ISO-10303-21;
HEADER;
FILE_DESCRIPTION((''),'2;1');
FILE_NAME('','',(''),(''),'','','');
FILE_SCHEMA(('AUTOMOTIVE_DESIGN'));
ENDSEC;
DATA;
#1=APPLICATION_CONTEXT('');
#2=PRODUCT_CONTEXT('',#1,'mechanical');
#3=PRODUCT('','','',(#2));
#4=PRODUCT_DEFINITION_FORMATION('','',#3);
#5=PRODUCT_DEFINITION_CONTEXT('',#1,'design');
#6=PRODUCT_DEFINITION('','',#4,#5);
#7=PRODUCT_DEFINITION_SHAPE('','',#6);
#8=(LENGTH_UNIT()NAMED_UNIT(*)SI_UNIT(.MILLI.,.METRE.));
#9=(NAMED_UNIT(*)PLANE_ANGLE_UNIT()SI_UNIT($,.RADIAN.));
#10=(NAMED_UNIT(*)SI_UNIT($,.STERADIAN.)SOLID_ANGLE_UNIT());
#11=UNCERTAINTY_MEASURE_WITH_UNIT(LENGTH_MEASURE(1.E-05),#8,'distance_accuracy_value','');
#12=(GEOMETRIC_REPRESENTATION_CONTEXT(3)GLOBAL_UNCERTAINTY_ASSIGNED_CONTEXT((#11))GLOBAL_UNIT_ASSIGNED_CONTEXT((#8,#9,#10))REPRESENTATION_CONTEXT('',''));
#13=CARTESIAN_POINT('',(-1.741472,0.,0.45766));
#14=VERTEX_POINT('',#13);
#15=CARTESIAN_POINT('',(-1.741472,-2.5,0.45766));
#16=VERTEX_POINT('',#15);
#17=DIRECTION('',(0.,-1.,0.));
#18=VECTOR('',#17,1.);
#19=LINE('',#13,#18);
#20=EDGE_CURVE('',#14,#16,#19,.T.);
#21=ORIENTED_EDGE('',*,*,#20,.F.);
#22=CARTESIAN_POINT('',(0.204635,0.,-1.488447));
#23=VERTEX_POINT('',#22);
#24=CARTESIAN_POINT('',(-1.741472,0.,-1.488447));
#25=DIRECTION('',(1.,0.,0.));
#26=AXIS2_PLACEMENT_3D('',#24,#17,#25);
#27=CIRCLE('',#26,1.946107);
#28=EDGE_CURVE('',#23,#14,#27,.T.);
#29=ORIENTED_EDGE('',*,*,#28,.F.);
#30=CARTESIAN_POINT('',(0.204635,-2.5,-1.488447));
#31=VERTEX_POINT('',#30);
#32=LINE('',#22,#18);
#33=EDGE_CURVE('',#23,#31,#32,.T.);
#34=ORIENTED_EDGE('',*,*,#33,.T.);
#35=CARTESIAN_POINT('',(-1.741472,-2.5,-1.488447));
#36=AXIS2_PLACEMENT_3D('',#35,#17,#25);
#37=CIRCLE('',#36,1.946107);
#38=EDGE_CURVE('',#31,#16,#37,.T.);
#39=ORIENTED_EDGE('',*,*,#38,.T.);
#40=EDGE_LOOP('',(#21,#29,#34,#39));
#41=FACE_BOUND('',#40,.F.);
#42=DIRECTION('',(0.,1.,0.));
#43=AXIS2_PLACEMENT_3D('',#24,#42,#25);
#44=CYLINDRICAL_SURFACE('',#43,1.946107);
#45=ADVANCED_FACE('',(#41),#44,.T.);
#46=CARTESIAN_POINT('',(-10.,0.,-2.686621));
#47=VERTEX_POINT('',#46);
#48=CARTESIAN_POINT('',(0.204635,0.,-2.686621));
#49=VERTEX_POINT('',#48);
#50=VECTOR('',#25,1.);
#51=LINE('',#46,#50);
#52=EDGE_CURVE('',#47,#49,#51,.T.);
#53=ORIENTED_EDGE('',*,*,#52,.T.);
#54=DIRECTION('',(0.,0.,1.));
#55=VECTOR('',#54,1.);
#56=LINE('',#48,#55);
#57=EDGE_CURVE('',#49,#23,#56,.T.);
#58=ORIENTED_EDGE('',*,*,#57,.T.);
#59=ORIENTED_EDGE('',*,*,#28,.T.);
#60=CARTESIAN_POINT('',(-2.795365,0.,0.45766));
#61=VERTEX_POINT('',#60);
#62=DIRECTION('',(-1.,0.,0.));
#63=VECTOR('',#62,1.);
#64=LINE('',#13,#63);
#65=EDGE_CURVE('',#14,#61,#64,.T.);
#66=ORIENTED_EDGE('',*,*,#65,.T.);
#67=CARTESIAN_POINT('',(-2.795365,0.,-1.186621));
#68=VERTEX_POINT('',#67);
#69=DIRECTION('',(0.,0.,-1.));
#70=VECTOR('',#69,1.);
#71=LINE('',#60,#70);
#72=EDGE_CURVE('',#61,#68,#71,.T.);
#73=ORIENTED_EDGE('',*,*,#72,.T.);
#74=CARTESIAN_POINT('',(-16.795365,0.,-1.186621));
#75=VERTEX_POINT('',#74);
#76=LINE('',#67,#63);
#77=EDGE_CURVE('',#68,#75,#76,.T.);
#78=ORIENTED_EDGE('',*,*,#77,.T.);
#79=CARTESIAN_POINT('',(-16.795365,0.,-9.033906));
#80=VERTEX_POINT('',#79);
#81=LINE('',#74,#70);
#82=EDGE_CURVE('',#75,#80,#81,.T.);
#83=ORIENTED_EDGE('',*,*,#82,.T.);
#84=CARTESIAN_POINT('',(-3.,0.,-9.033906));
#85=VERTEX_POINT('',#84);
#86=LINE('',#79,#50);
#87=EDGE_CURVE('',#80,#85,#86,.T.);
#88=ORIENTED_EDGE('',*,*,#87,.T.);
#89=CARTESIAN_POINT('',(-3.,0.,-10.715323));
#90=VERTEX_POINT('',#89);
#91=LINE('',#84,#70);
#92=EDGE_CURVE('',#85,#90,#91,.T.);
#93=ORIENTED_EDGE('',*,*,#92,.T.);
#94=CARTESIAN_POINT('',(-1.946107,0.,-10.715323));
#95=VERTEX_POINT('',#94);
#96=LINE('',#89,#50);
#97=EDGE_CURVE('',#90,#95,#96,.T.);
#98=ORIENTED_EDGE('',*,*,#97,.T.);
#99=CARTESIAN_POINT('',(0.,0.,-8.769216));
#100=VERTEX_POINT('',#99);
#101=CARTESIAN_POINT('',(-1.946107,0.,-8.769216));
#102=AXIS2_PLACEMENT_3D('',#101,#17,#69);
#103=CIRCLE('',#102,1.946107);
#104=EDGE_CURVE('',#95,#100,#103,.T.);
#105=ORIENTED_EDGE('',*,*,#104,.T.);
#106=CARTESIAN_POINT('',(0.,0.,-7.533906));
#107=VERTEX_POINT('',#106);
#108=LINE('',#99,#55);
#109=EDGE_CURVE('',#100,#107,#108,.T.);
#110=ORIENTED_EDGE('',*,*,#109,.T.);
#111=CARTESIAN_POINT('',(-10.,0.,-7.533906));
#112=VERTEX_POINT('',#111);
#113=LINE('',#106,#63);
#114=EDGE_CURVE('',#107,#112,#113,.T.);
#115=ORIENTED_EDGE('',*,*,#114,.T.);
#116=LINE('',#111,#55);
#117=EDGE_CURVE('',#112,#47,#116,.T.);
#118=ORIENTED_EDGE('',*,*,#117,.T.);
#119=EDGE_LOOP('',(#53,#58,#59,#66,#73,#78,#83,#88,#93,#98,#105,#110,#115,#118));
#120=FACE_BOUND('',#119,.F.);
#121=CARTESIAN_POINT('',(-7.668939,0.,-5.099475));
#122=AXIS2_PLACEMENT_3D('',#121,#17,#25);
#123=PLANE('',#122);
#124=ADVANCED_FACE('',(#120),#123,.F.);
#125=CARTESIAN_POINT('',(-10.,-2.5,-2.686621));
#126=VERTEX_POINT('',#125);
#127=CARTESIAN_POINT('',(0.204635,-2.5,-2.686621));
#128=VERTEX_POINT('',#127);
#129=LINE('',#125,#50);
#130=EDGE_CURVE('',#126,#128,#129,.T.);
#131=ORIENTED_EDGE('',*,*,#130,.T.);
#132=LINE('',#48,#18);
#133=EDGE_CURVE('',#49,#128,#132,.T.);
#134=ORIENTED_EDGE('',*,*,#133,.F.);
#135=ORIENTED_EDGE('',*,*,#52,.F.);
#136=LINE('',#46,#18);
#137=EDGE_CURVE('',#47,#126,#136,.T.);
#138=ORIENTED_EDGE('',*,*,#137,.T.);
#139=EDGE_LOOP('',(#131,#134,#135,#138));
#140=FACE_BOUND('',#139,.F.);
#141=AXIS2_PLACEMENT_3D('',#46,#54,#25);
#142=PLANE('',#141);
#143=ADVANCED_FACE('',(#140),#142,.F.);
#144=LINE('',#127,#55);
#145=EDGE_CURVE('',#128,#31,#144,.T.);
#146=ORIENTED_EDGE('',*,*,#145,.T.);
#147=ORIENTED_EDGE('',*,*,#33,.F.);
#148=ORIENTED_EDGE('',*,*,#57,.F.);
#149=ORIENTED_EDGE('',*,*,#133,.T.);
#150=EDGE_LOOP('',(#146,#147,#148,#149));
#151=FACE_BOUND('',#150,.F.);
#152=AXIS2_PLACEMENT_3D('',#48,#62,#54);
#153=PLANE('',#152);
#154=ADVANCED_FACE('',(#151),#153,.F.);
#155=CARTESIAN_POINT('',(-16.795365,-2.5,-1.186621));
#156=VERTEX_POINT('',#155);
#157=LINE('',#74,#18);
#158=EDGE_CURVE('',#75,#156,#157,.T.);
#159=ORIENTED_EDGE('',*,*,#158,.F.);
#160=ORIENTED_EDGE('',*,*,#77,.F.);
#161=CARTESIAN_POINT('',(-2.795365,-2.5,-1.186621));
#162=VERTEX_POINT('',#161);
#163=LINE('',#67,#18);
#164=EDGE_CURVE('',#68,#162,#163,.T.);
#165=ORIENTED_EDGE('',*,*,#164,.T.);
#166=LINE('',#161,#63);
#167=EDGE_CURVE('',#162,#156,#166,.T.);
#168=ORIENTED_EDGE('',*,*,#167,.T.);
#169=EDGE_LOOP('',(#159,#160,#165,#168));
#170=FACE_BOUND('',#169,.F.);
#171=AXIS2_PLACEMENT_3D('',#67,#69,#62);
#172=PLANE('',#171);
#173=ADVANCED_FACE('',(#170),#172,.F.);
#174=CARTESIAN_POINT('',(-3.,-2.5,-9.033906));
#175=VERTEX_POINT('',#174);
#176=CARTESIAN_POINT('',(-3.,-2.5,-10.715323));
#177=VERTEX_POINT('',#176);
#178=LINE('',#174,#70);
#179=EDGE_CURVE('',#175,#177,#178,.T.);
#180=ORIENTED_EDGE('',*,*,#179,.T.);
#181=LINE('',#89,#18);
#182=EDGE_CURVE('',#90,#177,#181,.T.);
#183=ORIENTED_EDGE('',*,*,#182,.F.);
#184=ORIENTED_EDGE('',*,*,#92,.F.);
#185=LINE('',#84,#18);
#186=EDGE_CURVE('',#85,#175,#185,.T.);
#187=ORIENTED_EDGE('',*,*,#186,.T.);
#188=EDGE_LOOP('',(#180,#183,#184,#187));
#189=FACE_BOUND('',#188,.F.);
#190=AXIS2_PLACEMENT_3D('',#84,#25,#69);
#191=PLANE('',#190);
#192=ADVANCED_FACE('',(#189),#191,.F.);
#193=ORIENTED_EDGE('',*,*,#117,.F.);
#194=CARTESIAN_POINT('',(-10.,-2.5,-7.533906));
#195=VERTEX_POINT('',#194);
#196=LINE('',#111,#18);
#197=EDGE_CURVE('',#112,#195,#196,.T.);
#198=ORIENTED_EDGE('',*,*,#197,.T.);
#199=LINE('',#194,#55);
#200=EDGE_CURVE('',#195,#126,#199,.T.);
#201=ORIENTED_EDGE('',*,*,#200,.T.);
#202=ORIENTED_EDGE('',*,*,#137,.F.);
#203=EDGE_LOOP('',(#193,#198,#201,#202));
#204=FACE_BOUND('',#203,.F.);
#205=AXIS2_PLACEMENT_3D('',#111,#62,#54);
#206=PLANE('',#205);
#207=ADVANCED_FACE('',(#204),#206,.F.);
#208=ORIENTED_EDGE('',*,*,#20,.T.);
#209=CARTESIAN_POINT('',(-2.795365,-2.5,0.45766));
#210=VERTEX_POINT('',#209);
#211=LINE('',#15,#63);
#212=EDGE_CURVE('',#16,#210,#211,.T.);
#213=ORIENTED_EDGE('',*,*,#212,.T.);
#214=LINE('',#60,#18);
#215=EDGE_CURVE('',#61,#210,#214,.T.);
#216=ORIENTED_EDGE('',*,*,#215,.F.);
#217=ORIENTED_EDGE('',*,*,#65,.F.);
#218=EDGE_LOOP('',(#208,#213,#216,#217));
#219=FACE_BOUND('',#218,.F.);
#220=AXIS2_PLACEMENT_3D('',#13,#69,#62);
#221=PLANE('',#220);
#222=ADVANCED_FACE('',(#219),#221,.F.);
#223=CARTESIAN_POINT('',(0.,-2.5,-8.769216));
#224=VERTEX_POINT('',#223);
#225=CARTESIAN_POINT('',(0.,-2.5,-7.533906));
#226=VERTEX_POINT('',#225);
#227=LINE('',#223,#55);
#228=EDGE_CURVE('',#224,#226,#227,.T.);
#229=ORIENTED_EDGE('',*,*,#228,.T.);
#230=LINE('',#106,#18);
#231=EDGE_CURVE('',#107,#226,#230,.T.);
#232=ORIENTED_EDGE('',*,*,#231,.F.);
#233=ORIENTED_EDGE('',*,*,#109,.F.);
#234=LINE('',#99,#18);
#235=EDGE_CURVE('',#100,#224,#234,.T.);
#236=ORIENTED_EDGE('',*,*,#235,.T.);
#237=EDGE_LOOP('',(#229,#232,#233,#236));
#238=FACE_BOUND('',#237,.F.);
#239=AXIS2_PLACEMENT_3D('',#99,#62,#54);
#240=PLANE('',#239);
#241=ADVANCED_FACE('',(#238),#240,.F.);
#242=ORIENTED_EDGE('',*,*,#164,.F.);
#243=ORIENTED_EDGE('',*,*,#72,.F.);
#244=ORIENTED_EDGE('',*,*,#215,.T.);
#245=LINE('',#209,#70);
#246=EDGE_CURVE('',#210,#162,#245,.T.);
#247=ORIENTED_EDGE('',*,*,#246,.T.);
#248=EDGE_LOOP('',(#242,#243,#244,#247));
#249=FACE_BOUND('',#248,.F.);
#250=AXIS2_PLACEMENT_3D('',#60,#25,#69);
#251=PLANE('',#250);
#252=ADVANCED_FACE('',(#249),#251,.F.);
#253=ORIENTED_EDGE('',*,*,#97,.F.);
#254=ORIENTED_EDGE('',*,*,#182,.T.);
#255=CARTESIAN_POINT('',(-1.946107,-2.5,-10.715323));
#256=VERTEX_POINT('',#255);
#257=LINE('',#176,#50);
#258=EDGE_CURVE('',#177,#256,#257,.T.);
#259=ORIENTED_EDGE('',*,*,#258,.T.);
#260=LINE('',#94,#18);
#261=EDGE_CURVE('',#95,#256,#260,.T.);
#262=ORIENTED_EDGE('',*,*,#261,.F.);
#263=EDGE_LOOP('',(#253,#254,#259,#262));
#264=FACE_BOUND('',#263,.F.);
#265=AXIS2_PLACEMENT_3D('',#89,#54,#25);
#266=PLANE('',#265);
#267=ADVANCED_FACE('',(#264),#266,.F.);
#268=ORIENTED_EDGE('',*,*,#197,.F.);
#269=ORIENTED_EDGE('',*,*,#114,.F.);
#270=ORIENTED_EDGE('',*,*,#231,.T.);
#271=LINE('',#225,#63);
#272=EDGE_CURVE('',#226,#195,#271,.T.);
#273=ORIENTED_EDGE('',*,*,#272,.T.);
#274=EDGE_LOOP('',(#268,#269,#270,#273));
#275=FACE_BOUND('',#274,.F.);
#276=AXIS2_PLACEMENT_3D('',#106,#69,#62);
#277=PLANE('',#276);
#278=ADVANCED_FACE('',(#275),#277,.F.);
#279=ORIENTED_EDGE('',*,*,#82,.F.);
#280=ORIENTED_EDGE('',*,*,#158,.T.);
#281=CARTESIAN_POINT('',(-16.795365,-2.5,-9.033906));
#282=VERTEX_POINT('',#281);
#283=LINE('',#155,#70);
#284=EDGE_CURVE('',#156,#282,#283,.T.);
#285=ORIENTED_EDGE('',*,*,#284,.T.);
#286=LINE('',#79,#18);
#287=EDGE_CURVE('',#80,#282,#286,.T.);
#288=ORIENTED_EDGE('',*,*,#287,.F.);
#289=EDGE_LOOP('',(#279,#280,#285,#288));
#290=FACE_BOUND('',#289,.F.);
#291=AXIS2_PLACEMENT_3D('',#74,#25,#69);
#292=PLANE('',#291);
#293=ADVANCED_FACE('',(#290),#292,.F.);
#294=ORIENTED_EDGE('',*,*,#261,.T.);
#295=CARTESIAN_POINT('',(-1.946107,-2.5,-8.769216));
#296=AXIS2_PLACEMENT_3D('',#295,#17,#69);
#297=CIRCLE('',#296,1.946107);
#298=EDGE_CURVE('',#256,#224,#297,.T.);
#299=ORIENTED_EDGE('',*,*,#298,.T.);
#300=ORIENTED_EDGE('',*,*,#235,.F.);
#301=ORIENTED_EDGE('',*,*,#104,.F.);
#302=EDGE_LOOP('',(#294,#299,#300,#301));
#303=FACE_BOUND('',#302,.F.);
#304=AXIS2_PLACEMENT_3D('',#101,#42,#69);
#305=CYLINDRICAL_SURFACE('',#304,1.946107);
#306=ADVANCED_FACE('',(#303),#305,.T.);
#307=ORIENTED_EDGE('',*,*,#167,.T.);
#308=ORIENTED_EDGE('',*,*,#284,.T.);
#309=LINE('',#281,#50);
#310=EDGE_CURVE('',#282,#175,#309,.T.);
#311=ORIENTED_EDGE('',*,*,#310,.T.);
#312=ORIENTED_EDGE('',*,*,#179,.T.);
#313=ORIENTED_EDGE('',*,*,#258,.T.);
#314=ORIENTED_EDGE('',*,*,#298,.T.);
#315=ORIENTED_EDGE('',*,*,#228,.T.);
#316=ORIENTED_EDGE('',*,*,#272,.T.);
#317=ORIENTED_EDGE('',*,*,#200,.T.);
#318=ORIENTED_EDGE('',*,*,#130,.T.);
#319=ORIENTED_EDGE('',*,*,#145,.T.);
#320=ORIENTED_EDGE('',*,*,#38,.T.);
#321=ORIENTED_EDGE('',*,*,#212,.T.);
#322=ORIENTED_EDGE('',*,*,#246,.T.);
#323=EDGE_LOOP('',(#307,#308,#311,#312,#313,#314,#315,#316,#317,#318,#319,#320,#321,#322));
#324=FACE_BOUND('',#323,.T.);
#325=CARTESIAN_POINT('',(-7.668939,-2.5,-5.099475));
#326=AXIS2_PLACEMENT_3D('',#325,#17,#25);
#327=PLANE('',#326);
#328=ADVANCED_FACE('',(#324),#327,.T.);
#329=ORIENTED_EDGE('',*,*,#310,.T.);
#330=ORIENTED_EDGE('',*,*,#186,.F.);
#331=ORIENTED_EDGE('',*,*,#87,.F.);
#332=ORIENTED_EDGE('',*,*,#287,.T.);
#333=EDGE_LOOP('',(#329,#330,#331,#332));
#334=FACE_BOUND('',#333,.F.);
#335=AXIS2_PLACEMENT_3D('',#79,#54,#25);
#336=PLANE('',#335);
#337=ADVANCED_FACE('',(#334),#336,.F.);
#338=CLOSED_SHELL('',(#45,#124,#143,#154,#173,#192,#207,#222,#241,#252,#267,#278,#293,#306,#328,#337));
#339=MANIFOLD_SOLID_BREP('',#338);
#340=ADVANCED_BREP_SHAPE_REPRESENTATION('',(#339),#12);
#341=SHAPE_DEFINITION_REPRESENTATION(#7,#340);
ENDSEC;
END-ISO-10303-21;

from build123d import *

# Parameters (mm, degrees)
F1_DEPTH = 2.5


# Not quite as in the source:
# - a feature names something its author has since deleted; it is built from what else it names


with BuildPart() as f1:
    # F0 (on Front) → F1 (new body)
    with BuildSketch(Plane.XZ):
        with BuildLine():
            Line((-16.7953648853, -9.0339062735), (-6.5833406376, -9.0339062735))
            Line((-6.5833406376, -9.0339062735), (-3, -9.0339062735))
            Line((-3, -9.0339062735), (-3, -10.7153228952))
            Line((-3, -10.7153228952), (-1.9461073071, -10.7153228952))
            ThreePointArc((-1.9461073071, -10.7153228952), (-0.5700016333, -10.1453212619), (0, -8.7692155881))
            Line((0, -8.7692155881), (0, -8.5))
            Line((0, -8.5), (0, -7.5339062735))
            Line((0, -7.5339062735), (-10, -7.5339062735))
            Line((-10, -7.5339062735), (-10, -2.6866213954))
            Line((-10, -2.6866213954), (0.2046351147, -2.6866213954))
            Line((0.2046351147, -2.6866213954), (0.2046351147, -1.7576624442))
            Line((0.2046351147, -1.7576624442), (0.2046351147, -1.4884468561))
            ThreePointArc((0.2046351147, -1.4884468561), (-0.3653665186, -0.1123411824), (-1.7414721924, 0.457660451))
            Line((-1.7414721924, 0.457660451), (-2.7953648853, 0.457660451))
            Line((-2.7953648853, 0.457660451), (-2.7953648853, -1.1866213954))
            Line((-2.7953648853, -1.1866213954), (-6.7360828114, -1.1866213954))
            Line((-6.7360828114, -1.1866213954), (-16.7953648853, -1.1866213954))
            Line((-16.7953648853, -1.1866213954), (-16.7953648853, -9.0339062735))
        make_face()
    extrude(amount=F1_DEPTH)


solid = f1.part
